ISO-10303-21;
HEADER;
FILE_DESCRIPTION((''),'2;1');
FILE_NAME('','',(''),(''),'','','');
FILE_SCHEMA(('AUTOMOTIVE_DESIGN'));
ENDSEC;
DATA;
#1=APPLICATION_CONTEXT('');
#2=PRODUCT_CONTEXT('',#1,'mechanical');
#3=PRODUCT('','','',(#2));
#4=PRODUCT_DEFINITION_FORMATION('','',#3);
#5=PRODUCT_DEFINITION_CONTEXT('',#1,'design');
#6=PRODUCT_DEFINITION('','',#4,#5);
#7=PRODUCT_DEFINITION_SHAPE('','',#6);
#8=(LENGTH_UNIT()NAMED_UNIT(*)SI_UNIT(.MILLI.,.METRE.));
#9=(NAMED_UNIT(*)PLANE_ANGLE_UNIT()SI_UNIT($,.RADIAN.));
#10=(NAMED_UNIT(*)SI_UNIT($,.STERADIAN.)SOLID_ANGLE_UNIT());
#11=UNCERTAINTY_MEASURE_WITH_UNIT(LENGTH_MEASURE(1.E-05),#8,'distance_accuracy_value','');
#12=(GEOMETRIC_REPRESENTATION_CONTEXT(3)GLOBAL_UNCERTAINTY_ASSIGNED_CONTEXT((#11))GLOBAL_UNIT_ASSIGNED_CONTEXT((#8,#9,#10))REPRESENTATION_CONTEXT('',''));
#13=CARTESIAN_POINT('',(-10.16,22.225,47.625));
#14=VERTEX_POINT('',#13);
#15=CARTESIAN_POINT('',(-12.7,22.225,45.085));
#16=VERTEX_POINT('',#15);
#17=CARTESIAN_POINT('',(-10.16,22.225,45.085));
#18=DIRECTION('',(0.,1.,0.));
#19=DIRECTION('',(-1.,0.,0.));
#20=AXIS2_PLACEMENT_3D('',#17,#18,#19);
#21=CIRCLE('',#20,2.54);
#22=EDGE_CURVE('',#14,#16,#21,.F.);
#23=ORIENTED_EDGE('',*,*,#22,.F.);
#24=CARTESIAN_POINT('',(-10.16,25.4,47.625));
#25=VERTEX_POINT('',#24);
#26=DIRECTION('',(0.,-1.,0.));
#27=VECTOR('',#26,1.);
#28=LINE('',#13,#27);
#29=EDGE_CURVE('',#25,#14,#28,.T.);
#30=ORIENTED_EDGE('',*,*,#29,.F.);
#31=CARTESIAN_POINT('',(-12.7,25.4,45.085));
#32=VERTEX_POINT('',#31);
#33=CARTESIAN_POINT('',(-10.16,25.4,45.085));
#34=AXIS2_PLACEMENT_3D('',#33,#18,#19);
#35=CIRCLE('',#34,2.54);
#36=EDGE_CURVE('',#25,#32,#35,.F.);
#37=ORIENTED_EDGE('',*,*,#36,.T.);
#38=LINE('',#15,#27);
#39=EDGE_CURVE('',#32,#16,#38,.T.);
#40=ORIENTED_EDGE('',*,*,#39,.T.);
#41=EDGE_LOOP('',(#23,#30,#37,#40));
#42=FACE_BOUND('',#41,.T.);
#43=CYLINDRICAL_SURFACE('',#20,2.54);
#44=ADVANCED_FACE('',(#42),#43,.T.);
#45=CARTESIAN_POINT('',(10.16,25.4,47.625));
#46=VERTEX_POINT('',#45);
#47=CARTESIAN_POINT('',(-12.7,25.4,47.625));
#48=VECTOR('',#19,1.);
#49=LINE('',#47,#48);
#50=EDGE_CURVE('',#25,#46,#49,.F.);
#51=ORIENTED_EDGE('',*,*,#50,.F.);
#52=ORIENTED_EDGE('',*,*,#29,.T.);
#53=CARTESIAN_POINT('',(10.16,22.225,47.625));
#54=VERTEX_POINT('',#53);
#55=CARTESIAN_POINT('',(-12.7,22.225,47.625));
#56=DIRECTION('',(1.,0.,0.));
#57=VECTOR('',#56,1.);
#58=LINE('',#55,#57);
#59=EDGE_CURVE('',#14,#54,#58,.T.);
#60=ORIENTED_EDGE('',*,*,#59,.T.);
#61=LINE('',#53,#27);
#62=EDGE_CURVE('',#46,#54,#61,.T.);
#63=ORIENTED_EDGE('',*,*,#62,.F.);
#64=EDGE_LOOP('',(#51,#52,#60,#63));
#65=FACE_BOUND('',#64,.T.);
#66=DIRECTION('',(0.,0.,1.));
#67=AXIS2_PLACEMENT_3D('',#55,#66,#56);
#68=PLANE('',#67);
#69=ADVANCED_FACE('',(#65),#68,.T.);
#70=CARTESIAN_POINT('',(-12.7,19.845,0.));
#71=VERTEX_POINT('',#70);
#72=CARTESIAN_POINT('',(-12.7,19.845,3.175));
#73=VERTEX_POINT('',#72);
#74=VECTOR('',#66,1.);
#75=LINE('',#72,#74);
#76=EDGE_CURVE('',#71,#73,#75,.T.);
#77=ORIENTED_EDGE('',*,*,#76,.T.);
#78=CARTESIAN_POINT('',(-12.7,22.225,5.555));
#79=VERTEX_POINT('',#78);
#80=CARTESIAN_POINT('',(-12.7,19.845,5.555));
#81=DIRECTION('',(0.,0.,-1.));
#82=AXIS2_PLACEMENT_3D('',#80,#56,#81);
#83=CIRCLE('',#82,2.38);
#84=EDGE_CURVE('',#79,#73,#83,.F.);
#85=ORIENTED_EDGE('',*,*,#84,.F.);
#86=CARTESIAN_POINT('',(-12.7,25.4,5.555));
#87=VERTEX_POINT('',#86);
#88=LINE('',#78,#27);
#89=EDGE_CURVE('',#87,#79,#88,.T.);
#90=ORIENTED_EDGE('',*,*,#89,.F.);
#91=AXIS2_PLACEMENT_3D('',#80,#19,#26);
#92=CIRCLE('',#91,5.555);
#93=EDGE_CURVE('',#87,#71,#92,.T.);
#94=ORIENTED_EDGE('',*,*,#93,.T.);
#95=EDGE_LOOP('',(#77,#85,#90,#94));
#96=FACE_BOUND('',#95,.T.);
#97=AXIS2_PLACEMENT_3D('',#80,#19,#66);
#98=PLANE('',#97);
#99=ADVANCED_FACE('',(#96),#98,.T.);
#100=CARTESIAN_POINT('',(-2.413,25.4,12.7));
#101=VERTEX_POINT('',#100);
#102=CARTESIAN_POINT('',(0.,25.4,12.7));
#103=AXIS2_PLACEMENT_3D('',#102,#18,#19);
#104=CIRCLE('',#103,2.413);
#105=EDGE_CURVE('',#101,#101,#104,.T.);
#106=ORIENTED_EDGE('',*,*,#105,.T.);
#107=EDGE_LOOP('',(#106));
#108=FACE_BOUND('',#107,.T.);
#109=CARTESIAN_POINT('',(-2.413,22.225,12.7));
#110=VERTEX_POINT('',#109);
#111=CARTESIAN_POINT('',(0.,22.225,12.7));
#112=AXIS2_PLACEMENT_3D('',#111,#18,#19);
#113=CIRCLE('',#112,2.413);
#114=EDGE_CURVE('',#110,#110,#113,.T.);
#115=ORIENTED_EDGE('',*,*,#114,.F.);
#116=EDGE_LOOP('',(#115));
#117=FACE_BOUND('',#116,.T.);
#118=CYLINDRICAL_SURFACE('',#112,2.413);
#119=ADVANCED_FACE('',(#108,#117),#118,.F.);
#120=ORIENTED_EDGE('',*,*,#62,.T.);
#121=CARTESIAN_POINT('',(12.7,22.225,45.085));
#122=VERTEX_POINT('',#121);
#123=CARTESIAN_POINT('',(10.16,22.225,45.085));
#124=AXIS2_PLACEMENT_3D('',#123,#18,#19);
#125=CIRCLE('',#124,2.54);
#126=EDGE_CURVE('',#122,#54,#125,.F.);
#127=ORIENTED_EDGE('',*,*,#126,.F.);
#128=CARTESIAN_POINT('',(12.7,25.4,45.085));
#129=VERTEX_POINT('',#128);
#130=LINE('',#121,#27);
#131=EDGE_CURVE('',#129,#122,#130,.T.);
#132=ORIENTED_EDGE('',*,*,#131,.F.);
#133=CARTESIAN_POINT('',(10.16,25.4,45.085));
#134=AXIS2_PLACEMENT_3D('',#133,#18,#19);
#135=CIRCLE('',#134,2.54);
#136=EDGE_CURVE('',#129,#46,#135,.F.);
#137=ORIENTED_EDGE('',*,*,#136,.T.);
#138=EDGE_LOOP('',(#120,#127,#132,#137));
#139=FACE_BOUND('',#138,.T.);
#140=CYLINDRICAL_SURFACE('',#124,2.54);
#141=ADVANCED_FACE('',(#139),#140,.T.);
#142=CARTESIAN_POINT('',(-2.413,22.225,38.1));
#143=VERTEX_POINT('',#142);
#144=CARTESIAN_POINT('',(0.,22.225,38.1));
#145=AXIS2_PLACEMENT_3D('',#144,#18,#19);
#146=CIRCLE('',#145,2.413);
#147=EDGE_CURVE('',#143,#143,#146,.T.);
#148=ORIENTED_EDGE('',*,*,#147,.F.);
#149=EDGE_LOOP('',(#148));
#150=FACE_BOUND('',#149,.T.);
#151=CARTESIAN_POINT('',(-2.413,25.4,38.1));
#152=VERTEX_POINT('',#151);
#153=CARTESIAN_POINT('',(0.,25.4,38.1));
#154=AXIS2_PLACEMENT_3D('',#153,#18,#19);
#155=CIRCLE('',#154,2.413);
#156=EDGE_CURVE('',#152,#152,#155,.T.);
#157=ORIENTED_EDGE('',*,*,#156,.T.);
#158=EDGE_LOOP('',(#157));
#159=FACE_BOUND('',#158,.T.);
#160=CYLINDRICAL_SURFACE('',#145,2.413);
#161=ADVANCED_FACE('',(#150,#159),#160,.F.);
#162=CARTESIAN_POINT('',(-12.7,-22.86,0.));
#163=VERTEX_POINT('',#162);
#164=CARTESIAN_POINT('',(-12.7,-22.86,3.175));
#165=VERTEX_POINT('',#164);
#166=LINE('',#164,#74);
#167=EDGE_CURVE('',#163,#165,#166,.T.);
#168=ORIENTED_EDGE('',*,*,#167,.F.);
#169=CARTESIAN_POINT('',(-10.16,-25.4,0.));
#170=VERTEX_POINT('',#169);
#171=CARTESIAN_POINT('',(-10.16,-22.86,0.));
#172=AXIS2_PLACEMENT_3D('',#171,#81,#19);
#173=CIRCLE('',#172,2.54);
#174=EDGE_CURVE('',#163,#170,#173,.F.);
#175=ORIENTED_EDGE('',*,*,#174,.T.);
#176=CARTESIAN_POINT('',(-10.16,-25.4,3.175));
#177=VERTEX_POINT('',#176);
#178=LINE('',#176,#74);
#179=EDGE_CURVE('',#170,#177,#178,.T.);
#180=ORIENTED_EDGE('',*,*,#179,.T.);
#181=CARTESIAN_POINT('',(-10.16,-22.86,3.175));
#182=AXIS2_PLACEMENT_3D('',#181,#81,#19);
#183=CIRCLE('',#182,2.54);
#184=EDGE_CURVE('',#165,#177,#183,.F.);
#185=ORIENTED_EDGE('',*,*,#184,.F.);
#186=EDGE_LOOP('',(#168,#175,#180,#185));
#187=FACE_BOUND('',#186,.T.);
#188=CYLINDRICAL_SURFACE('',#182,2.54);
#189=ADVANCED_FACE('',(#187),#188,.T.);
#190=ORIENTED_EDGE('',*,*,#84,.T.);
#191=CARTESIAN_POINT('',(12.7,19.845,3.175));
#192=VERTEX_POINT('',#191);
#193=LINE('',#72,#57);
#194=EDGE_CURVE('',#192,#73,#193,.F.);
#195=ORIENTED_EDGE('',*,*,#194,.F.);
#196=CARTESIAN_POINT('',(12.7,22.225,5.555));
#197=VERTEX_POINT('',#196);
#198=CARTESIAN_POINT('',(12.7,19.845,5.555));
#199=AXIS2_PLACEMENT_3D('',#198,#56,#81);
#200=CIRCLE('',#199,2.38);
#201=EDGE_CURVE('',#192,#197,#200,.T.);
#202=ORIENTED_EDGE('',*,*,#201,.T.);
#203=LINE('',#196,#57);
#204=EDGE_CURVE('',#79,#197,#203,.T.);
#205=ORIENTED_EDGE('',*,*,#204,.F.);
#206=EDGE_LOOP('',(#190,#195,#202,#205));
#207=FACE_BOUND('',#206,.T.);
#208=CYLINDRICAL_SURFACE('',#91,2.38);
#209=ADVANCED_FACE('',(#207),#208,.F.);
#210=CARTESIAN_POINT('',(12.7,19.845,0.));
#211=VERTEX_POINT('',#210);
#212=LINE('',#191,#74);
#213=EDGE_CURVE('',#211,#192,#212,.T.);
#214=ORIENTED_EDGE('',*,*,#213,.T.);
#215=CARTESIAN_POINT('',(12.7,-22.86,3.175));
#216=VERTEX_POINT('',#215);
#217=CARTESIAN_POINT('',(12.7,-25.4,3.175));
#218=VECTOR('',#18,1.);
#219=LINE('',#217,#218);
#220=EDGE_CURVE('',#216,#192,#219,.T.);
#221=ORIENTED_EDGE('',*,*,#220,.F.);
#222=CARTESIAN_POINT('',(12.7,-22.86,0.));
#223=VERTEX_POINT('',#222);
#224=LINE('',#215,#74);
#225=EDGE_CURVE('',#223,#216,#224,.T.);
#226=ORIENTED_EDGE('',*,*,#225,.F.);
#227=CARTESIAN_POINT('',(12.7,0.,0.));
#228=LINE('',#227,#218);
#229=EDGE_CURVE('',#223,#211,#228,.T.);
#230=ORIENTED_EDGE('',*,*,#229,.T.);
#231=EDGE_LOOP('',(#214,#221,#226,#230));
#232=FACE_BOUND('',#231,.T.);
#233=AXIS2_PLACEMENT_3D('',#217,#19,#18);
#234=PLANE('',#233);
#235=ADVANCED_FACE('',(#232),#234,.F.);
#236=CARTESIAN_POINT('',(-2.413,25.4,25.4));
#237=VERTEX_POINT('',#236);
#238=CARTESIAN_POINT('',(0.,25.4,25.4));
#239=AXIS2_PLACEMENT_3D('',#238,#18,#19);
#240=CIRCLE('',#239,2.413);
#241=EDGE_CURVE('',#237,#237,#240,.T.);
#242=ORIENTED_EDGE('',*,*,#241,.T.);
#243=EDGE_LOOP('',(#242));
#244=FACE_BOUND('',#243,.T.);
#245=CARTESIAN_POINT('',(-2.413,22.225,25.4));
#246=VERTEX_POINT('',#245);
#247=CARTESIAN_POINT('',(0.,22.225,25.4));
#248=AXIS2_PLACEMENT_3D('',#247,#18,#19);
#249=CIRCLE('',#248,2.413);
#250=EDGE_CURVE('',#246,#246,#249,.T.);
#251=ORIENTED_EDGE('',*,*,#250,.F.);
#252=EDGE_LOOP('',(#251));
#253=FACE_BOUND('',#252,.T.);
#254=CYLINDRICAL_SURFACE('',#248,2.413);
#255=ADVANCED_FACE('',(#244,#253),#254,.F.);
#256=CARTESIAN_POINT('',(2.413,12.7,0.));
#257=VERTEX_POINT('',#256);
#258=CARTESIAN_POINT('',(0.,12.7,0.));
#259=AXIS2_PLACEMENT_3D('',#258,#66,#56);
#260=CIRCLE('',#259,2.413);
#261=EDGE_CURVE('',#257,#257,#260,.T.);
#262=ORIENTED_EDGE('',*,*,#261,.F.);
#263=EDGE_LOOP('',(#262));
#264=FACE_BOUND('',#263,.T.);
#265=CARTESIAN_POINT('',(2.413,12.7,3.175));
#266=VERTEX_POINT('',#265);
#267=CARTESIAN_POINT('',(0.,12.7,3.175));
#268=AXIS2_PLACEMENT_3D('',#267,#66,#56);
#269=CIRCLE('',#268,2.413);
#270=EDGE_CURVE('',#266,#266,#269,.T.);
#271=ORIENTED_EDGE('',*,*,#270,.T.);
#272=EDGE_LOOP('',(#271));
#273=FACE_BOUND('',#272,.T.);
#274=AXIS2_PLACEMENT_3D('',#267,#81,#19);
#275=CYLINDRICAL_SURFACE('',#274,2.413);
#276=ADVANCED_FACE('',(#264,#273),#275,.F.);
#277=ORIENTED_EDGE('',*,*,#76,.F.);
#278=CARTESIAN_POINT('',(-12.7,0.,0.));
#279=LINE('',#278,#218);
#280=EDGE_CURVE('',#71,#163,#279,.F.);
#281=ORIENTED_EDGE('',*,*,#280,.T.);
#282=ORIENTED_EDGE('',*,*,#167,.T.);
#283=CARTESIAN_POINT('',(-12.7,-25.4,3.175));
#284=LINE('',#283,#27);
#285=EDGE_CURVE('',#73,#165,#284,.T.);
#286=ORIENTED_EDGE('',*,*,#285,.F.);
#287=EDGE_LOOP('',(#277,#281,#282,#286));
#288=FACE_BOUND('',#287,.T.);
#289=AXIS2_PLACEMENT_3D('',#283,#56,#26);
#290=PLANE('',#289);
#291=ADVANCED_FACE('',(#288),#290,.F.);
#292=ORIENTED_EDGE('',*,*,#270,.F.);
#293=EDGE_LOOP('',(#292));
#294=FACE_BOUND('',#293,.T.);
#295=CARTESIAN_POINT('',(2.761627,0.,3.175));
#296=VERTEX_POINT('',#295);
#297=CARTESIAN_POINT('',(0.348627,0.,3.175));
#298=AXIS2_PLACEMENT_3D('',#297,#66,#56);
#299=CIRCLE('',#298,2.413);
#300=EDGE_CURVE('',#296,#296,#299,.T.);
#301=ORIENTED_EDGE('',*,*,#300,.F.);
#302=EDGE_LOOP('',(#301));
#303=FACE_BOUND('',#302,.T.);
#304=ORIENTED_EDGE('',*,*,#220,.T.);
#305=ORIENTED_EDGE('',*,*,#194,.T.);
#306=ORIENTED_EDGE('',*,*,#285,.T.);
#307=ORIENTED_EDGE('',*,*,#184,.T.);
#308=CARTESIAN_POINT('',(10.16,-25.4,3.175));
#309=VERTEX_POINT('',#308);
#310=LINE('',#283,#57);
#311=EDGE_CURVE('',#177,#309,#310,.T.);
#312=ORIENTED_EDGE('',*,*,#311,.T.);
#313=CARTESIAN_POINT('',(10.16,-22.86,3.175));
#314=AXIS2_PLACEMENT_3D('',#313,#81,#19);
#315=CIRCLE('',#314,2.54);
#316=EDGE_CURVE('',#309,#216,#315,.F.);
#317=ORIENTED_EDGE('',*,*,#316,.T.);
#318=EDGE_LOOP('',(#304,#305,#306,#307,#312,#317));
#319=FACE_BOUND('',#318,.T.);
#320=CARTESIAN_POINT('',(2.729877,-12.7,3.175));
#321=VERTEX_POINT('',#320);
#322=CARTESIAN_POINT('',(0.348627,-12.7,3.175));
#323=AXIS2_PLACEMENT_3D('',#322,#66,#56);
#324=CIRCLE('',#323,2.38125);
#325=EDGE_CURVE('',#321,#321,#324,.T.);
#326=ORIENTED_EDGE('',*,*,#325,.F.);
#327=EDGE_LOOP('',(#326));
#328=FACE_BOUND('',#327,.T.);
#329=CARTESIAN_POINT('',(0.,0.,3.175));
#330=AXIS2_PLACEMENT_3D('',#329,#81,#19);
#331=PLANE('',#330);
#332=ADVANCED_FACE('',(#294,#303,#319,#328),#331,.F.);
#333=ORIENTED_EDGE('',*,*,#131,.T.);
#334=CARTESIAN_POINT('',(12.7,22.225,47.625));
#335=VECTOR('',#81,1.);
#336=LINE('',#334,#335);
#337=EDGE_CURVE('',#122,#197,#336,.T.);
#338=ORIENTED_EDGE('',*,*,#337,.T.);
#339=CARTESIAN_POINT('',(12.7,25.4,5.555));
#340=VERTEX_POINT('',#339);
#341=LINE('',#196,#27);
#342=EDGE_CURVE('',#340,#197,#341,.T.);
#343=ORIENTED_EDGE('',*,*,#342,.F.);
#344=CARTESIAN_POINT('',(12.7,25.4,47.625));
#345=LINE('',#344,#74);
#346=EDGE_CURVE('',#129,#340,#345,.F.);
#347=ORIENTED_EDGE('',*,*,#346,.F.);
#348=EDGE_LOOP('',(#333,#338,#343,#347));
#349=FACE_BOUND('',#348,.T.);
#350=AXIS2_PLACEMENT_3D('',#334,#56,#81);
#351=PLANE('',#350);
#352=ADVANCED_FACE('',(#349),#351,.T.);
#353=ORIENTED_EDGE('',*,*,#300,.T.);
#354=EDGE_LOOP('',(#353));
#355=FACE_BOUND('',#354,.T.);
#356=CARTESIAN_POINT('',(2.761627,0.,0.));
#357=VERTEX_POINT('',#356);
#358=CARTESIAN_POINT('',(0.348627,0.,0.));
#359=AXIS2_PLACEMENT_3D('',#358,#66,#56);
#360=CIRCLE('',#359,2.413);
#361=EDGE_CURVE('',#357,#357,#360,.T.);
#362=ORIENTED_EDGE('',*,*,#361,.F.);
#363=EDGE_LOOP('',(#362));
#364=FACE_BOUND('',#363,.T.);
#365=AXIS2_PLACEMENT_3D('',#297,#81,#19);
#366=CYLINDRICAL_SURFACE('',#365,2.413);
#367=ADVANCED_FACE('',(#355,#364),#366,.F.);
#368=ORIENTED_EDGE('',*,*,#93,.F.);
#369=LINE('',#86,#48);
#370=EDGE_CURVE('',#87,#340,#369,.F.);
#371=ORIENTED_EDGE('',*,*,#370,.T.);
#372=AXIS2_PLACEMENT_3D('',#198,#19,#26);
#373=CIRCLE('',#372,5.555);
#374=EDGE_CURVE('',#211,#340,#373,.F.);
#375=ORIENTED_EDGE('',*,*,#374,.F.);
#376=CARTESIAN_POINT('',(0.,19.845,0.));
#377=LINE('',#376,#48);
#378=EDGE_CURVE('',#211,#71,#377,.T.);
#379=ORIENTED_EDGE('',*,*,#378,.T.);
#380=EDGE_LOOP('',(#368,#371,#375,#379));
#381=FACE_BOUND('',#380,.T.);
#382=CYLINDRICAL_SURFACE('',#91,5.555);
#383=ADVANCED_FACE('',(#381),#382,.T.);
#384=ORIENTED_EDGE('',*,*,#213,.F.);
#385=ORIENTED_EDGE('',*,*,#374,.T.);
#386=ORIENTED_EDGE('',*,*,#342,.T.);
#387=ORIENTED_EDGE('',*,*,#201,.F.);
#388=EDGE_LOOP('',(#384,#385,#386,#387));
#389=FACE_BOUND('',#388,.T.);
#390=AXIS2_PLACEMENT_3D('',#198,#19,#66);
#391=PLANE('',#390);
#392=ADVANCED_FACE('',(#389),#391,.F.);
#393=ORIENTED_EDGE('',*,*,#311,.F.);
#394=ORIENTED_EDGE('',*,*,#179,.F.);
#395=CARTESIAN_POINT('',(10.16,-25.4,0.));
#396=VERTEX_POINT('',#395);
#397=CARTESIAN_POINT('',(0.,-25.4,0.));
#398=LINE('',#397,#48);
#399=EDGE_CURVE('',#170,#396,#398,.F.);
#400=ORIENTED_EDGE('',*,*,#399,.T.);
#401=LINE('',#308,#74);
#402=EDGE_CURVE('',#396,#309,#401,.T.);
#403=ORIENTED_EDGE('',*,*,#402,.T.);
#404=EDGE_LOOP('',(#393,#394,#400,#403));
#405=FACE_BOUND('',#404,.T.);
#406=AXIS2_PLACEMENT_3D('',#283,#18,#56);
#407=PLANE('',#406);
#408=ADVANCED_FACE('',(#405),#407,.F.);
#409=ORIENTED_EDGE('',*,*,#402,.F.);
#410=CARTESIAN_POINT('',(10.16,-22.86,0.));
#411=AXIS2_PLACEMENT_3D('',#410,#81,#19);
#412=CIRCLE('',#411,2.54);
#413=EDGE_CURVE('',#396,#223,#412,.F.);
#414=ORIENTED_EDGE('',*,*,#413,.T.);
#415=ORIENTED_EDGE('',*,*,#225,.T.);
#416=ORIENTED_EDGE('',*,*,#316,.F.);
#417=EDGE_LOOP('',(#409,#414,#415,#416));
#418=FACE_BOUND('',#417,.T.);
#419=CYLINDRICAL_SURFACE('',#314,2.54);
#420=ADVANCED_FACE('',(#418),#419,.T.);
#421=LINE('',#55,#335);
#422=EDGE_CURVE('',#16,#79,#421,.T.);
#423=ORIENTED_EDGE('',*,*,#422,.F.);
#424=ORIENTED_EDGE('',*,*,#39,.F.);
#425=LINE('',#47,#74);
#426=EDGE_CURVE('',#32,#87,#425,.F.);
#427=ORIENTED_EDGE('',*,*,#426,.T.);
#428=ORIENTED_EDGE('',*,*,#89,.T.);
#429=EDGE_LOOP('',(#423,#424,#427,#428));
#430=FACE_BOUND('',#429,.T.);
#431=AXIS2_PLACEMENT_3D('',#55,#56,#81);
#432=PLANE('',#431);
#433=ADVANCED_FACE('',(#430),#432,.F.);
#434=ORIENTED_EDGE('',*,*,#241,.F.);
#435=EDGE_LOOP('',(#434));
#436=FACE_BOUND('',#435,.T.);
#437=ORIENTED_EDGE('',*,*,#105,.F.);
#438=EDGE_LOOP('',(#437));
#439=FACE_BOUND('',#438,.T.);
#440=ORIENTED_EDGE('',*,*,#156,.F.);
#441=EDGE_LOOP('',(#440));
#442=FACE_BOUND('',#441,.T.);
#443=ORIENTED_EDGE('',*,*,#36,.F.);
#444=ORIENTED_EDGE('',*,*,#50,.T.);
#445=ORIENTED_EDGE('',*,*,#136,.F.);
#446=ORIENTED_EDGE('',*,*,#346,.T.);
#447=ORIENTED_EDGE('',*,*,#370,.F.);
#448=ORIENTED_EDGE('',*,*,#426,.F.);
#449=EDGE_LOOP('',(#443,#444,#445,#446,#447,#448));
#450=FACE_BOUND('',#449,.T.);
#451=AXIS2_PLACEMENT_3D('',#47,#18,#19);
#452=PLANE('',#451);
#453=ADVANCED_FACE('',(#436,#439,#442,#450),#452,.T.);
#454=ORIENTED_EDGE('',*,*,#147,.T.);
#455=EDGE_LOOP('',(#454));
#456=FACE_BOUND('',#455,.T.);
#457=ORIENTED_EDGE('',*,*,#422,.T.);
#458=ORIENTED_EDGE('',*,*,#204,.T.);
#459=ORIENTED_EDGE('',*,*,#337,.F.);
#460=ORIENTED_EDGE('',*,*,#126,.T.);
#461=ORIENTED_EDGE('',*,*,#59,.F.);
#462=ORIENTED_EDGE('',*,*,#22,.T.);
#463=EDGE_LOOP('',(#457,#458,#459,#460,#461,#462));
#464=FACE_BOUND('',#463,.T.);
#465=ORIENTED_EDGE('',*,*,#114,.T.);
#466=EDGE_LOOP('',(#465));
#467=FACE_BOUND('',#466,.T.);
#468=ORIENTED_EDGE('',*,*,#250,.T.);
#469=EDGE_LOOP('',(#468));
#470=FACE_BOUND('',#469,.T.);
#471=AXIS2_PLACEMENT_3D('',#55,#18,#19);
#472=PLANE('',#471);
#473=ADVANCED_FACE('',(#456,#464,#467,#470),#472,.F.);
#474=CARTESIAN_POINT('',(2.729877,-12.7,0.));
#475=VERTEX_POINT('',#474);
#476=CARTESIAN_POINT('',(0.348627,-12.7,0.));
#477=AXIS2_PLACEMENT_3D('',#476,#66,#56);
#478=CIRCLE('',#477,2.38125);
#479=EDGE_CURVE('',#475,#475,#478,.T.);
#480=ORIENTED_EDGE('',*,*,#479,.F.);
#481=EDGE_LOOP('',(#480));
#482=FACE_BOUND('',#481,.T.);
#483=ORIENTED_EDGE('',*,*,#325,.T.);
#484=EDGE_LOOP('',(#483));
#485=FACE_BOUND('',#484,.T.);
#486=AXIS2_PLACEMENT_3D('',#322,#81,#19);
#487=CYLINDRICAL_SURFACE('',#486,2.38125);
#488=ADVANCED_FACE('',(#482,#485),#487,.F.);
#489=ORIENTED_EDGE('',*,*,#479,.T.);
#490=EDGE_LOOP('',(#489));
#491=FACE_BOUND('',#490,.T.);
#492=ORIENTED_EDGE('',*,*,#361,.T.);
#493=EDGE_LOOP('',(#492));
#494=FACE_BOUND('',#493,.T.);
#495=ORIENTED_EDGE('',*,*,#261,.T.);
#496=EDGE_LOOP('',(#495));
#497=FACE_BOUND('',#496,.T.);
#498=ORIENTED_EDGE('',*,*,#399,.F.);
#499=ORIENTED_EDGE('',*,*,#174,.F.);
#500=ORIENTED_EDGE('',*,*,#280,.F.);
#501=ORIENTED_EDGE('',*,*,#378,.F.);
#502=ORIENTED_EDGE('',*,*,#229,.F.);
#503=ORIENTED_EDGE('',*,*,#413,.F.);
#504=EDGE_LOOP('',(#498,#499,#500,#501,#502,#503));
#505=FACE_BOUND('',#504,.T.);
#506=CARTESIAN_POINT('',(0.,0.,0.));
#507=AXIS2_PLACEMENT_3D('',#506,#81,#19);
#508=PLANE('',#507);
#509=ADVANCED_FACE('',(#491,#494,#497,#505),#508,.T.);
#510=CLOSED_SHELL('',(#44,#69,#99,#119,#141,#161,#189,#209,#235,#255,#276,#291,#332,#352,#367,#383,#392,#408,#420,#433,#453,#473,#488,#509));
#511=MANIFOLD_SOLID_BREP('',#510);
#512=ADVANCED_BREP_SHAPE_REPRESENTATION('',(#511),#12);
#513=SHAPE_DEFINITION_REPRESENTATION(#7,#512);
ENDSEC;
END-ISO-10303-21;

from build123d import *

# Parameters (mm, degrees)
SKETCH1_W              = 25.4
SKETCH1_H              = 50.8
SKETCH1_R              = 2.413
SKETCH1_R_2            = 2.38125
BOSS_EXTRUDE1_DEPTH    = 3.175
SKETCH2_W              = 25.4
SKETCH2_H              = 3.175
BOSS_EXTRUDE2_DEPTH    = 44.45
SKETCH3_R              = 2.413
CUT_EXTRUDE1_DEPTH     = 44.45
FILLET1_R              = 2.54
CONVERT_SOLID1_START   = -12.7
CONVERT_SOLID1_DEPTH   = 25.4
CONVERT_SOLID1_2_DEPTH = 25.4


# Read off the part's stored shape, not the designer's step: Convert-Solid1
with BuildPart() as part:
    # Sketch1 → Boss-Extrude1 (new body)
    with BuildSketch(Plane.XY):
        Rectangle(SKETCH1_W, SKETCH1_H)
        with Locations((0, 12.7)):
            Circle(SKETCH1_R, mode=Mode.SUBTRACT)
        with Locations((0.348627451, 0)):
            Circle(SKETCH1_R, mode=Mode.SUBTRACT)
        with Locations((0.348627451, -12.7)):
            Circle(SKETCH1_R_2, mode=Mode.SUBTRACT)
    extrude(amount=BOSS_EXTRUDE1_DEPTH)

    # Sketch2 → Boss-Extrude2 (add)
    with BuildSketch(Plane.XY.offset(3.175)):
        with Locations((0, 23.8125)):
            Rectangle(SKETCH2_W, SKETCH2_H)
    extrude(amount=BOSS_EXTRUDE2_DEPTH)

    # Sketch3 → Cut-Extrude1 (cut)
    with BuildSketch(Plane(origin=(0, 25.4, 0), x_dir=(1, 0, 0), z_dir=(0, 1, 0))):
        with Locations(Location((0, -12.7, 0), (0, 0, 270))):
            Circle(SKETCH3_R)
        with Locations(Location((0, -25.4, 0), (0, 0, 270))):
            Circle(SKETCH3_R)
        with Locations(Location((0, -38.1, 0), (0, 0, 270))):
            Circle(SKETCH3_R)
    extrude(amount=-CUT_EXTRUDE1_DEPTH, mode=Mode.SUBTRACT)

    # Fillet1
    fillet1_edges = [part.edges().sort_by_distance(p)[0] for p in [
        (-12.7, 23.8125, 47.625),
        (12.7, 23.8125, 47.625),
        (12.7, -25.4, 1.5875),
        (-12.7, -25.4, 1.5875),
    ]]
    fillet(fillet1_edges, radius=FILLET1_R)

    # Convert-Solid1 outline → Convert-Solid1 (cut)
    with BuildSketch(Plane.YZ.offset(CONVERT_SOLID1_START)):
        with BuildLine():
            Line((25.4, 0), (25.4, 5.555000066))
            ThreePointArc((25.4, 5.555000066), (23.77297815, 1.62702185), (19.844999934, 0))
            Line((19.844999934, 0), (25.4, 0))
        make_face()
    extrude(amount=CONVERT_SOLID1_DEPTH, mode=Mode.SUBTRACT)

    # Convert-Solid1 2 outline → Convert-Solid1 2 (add)
    with BuildSketch(Plane.YZ.offset(CONVERT_SOLID1_START)):
        with BuildLine():
            Line((22.225, 3.175), (22.225, 5.555000066))
            ThreePointArc((22.225, 5.555000066), (21.52791412, 3.87208588), (19.844999934, 3.175))
            Line((19.844999934, 3.175), (22.225, 3.175))
        make_face()
    extrude(amount=CONVERT_SOLID1_2_DEPTH)


solid = part.part
